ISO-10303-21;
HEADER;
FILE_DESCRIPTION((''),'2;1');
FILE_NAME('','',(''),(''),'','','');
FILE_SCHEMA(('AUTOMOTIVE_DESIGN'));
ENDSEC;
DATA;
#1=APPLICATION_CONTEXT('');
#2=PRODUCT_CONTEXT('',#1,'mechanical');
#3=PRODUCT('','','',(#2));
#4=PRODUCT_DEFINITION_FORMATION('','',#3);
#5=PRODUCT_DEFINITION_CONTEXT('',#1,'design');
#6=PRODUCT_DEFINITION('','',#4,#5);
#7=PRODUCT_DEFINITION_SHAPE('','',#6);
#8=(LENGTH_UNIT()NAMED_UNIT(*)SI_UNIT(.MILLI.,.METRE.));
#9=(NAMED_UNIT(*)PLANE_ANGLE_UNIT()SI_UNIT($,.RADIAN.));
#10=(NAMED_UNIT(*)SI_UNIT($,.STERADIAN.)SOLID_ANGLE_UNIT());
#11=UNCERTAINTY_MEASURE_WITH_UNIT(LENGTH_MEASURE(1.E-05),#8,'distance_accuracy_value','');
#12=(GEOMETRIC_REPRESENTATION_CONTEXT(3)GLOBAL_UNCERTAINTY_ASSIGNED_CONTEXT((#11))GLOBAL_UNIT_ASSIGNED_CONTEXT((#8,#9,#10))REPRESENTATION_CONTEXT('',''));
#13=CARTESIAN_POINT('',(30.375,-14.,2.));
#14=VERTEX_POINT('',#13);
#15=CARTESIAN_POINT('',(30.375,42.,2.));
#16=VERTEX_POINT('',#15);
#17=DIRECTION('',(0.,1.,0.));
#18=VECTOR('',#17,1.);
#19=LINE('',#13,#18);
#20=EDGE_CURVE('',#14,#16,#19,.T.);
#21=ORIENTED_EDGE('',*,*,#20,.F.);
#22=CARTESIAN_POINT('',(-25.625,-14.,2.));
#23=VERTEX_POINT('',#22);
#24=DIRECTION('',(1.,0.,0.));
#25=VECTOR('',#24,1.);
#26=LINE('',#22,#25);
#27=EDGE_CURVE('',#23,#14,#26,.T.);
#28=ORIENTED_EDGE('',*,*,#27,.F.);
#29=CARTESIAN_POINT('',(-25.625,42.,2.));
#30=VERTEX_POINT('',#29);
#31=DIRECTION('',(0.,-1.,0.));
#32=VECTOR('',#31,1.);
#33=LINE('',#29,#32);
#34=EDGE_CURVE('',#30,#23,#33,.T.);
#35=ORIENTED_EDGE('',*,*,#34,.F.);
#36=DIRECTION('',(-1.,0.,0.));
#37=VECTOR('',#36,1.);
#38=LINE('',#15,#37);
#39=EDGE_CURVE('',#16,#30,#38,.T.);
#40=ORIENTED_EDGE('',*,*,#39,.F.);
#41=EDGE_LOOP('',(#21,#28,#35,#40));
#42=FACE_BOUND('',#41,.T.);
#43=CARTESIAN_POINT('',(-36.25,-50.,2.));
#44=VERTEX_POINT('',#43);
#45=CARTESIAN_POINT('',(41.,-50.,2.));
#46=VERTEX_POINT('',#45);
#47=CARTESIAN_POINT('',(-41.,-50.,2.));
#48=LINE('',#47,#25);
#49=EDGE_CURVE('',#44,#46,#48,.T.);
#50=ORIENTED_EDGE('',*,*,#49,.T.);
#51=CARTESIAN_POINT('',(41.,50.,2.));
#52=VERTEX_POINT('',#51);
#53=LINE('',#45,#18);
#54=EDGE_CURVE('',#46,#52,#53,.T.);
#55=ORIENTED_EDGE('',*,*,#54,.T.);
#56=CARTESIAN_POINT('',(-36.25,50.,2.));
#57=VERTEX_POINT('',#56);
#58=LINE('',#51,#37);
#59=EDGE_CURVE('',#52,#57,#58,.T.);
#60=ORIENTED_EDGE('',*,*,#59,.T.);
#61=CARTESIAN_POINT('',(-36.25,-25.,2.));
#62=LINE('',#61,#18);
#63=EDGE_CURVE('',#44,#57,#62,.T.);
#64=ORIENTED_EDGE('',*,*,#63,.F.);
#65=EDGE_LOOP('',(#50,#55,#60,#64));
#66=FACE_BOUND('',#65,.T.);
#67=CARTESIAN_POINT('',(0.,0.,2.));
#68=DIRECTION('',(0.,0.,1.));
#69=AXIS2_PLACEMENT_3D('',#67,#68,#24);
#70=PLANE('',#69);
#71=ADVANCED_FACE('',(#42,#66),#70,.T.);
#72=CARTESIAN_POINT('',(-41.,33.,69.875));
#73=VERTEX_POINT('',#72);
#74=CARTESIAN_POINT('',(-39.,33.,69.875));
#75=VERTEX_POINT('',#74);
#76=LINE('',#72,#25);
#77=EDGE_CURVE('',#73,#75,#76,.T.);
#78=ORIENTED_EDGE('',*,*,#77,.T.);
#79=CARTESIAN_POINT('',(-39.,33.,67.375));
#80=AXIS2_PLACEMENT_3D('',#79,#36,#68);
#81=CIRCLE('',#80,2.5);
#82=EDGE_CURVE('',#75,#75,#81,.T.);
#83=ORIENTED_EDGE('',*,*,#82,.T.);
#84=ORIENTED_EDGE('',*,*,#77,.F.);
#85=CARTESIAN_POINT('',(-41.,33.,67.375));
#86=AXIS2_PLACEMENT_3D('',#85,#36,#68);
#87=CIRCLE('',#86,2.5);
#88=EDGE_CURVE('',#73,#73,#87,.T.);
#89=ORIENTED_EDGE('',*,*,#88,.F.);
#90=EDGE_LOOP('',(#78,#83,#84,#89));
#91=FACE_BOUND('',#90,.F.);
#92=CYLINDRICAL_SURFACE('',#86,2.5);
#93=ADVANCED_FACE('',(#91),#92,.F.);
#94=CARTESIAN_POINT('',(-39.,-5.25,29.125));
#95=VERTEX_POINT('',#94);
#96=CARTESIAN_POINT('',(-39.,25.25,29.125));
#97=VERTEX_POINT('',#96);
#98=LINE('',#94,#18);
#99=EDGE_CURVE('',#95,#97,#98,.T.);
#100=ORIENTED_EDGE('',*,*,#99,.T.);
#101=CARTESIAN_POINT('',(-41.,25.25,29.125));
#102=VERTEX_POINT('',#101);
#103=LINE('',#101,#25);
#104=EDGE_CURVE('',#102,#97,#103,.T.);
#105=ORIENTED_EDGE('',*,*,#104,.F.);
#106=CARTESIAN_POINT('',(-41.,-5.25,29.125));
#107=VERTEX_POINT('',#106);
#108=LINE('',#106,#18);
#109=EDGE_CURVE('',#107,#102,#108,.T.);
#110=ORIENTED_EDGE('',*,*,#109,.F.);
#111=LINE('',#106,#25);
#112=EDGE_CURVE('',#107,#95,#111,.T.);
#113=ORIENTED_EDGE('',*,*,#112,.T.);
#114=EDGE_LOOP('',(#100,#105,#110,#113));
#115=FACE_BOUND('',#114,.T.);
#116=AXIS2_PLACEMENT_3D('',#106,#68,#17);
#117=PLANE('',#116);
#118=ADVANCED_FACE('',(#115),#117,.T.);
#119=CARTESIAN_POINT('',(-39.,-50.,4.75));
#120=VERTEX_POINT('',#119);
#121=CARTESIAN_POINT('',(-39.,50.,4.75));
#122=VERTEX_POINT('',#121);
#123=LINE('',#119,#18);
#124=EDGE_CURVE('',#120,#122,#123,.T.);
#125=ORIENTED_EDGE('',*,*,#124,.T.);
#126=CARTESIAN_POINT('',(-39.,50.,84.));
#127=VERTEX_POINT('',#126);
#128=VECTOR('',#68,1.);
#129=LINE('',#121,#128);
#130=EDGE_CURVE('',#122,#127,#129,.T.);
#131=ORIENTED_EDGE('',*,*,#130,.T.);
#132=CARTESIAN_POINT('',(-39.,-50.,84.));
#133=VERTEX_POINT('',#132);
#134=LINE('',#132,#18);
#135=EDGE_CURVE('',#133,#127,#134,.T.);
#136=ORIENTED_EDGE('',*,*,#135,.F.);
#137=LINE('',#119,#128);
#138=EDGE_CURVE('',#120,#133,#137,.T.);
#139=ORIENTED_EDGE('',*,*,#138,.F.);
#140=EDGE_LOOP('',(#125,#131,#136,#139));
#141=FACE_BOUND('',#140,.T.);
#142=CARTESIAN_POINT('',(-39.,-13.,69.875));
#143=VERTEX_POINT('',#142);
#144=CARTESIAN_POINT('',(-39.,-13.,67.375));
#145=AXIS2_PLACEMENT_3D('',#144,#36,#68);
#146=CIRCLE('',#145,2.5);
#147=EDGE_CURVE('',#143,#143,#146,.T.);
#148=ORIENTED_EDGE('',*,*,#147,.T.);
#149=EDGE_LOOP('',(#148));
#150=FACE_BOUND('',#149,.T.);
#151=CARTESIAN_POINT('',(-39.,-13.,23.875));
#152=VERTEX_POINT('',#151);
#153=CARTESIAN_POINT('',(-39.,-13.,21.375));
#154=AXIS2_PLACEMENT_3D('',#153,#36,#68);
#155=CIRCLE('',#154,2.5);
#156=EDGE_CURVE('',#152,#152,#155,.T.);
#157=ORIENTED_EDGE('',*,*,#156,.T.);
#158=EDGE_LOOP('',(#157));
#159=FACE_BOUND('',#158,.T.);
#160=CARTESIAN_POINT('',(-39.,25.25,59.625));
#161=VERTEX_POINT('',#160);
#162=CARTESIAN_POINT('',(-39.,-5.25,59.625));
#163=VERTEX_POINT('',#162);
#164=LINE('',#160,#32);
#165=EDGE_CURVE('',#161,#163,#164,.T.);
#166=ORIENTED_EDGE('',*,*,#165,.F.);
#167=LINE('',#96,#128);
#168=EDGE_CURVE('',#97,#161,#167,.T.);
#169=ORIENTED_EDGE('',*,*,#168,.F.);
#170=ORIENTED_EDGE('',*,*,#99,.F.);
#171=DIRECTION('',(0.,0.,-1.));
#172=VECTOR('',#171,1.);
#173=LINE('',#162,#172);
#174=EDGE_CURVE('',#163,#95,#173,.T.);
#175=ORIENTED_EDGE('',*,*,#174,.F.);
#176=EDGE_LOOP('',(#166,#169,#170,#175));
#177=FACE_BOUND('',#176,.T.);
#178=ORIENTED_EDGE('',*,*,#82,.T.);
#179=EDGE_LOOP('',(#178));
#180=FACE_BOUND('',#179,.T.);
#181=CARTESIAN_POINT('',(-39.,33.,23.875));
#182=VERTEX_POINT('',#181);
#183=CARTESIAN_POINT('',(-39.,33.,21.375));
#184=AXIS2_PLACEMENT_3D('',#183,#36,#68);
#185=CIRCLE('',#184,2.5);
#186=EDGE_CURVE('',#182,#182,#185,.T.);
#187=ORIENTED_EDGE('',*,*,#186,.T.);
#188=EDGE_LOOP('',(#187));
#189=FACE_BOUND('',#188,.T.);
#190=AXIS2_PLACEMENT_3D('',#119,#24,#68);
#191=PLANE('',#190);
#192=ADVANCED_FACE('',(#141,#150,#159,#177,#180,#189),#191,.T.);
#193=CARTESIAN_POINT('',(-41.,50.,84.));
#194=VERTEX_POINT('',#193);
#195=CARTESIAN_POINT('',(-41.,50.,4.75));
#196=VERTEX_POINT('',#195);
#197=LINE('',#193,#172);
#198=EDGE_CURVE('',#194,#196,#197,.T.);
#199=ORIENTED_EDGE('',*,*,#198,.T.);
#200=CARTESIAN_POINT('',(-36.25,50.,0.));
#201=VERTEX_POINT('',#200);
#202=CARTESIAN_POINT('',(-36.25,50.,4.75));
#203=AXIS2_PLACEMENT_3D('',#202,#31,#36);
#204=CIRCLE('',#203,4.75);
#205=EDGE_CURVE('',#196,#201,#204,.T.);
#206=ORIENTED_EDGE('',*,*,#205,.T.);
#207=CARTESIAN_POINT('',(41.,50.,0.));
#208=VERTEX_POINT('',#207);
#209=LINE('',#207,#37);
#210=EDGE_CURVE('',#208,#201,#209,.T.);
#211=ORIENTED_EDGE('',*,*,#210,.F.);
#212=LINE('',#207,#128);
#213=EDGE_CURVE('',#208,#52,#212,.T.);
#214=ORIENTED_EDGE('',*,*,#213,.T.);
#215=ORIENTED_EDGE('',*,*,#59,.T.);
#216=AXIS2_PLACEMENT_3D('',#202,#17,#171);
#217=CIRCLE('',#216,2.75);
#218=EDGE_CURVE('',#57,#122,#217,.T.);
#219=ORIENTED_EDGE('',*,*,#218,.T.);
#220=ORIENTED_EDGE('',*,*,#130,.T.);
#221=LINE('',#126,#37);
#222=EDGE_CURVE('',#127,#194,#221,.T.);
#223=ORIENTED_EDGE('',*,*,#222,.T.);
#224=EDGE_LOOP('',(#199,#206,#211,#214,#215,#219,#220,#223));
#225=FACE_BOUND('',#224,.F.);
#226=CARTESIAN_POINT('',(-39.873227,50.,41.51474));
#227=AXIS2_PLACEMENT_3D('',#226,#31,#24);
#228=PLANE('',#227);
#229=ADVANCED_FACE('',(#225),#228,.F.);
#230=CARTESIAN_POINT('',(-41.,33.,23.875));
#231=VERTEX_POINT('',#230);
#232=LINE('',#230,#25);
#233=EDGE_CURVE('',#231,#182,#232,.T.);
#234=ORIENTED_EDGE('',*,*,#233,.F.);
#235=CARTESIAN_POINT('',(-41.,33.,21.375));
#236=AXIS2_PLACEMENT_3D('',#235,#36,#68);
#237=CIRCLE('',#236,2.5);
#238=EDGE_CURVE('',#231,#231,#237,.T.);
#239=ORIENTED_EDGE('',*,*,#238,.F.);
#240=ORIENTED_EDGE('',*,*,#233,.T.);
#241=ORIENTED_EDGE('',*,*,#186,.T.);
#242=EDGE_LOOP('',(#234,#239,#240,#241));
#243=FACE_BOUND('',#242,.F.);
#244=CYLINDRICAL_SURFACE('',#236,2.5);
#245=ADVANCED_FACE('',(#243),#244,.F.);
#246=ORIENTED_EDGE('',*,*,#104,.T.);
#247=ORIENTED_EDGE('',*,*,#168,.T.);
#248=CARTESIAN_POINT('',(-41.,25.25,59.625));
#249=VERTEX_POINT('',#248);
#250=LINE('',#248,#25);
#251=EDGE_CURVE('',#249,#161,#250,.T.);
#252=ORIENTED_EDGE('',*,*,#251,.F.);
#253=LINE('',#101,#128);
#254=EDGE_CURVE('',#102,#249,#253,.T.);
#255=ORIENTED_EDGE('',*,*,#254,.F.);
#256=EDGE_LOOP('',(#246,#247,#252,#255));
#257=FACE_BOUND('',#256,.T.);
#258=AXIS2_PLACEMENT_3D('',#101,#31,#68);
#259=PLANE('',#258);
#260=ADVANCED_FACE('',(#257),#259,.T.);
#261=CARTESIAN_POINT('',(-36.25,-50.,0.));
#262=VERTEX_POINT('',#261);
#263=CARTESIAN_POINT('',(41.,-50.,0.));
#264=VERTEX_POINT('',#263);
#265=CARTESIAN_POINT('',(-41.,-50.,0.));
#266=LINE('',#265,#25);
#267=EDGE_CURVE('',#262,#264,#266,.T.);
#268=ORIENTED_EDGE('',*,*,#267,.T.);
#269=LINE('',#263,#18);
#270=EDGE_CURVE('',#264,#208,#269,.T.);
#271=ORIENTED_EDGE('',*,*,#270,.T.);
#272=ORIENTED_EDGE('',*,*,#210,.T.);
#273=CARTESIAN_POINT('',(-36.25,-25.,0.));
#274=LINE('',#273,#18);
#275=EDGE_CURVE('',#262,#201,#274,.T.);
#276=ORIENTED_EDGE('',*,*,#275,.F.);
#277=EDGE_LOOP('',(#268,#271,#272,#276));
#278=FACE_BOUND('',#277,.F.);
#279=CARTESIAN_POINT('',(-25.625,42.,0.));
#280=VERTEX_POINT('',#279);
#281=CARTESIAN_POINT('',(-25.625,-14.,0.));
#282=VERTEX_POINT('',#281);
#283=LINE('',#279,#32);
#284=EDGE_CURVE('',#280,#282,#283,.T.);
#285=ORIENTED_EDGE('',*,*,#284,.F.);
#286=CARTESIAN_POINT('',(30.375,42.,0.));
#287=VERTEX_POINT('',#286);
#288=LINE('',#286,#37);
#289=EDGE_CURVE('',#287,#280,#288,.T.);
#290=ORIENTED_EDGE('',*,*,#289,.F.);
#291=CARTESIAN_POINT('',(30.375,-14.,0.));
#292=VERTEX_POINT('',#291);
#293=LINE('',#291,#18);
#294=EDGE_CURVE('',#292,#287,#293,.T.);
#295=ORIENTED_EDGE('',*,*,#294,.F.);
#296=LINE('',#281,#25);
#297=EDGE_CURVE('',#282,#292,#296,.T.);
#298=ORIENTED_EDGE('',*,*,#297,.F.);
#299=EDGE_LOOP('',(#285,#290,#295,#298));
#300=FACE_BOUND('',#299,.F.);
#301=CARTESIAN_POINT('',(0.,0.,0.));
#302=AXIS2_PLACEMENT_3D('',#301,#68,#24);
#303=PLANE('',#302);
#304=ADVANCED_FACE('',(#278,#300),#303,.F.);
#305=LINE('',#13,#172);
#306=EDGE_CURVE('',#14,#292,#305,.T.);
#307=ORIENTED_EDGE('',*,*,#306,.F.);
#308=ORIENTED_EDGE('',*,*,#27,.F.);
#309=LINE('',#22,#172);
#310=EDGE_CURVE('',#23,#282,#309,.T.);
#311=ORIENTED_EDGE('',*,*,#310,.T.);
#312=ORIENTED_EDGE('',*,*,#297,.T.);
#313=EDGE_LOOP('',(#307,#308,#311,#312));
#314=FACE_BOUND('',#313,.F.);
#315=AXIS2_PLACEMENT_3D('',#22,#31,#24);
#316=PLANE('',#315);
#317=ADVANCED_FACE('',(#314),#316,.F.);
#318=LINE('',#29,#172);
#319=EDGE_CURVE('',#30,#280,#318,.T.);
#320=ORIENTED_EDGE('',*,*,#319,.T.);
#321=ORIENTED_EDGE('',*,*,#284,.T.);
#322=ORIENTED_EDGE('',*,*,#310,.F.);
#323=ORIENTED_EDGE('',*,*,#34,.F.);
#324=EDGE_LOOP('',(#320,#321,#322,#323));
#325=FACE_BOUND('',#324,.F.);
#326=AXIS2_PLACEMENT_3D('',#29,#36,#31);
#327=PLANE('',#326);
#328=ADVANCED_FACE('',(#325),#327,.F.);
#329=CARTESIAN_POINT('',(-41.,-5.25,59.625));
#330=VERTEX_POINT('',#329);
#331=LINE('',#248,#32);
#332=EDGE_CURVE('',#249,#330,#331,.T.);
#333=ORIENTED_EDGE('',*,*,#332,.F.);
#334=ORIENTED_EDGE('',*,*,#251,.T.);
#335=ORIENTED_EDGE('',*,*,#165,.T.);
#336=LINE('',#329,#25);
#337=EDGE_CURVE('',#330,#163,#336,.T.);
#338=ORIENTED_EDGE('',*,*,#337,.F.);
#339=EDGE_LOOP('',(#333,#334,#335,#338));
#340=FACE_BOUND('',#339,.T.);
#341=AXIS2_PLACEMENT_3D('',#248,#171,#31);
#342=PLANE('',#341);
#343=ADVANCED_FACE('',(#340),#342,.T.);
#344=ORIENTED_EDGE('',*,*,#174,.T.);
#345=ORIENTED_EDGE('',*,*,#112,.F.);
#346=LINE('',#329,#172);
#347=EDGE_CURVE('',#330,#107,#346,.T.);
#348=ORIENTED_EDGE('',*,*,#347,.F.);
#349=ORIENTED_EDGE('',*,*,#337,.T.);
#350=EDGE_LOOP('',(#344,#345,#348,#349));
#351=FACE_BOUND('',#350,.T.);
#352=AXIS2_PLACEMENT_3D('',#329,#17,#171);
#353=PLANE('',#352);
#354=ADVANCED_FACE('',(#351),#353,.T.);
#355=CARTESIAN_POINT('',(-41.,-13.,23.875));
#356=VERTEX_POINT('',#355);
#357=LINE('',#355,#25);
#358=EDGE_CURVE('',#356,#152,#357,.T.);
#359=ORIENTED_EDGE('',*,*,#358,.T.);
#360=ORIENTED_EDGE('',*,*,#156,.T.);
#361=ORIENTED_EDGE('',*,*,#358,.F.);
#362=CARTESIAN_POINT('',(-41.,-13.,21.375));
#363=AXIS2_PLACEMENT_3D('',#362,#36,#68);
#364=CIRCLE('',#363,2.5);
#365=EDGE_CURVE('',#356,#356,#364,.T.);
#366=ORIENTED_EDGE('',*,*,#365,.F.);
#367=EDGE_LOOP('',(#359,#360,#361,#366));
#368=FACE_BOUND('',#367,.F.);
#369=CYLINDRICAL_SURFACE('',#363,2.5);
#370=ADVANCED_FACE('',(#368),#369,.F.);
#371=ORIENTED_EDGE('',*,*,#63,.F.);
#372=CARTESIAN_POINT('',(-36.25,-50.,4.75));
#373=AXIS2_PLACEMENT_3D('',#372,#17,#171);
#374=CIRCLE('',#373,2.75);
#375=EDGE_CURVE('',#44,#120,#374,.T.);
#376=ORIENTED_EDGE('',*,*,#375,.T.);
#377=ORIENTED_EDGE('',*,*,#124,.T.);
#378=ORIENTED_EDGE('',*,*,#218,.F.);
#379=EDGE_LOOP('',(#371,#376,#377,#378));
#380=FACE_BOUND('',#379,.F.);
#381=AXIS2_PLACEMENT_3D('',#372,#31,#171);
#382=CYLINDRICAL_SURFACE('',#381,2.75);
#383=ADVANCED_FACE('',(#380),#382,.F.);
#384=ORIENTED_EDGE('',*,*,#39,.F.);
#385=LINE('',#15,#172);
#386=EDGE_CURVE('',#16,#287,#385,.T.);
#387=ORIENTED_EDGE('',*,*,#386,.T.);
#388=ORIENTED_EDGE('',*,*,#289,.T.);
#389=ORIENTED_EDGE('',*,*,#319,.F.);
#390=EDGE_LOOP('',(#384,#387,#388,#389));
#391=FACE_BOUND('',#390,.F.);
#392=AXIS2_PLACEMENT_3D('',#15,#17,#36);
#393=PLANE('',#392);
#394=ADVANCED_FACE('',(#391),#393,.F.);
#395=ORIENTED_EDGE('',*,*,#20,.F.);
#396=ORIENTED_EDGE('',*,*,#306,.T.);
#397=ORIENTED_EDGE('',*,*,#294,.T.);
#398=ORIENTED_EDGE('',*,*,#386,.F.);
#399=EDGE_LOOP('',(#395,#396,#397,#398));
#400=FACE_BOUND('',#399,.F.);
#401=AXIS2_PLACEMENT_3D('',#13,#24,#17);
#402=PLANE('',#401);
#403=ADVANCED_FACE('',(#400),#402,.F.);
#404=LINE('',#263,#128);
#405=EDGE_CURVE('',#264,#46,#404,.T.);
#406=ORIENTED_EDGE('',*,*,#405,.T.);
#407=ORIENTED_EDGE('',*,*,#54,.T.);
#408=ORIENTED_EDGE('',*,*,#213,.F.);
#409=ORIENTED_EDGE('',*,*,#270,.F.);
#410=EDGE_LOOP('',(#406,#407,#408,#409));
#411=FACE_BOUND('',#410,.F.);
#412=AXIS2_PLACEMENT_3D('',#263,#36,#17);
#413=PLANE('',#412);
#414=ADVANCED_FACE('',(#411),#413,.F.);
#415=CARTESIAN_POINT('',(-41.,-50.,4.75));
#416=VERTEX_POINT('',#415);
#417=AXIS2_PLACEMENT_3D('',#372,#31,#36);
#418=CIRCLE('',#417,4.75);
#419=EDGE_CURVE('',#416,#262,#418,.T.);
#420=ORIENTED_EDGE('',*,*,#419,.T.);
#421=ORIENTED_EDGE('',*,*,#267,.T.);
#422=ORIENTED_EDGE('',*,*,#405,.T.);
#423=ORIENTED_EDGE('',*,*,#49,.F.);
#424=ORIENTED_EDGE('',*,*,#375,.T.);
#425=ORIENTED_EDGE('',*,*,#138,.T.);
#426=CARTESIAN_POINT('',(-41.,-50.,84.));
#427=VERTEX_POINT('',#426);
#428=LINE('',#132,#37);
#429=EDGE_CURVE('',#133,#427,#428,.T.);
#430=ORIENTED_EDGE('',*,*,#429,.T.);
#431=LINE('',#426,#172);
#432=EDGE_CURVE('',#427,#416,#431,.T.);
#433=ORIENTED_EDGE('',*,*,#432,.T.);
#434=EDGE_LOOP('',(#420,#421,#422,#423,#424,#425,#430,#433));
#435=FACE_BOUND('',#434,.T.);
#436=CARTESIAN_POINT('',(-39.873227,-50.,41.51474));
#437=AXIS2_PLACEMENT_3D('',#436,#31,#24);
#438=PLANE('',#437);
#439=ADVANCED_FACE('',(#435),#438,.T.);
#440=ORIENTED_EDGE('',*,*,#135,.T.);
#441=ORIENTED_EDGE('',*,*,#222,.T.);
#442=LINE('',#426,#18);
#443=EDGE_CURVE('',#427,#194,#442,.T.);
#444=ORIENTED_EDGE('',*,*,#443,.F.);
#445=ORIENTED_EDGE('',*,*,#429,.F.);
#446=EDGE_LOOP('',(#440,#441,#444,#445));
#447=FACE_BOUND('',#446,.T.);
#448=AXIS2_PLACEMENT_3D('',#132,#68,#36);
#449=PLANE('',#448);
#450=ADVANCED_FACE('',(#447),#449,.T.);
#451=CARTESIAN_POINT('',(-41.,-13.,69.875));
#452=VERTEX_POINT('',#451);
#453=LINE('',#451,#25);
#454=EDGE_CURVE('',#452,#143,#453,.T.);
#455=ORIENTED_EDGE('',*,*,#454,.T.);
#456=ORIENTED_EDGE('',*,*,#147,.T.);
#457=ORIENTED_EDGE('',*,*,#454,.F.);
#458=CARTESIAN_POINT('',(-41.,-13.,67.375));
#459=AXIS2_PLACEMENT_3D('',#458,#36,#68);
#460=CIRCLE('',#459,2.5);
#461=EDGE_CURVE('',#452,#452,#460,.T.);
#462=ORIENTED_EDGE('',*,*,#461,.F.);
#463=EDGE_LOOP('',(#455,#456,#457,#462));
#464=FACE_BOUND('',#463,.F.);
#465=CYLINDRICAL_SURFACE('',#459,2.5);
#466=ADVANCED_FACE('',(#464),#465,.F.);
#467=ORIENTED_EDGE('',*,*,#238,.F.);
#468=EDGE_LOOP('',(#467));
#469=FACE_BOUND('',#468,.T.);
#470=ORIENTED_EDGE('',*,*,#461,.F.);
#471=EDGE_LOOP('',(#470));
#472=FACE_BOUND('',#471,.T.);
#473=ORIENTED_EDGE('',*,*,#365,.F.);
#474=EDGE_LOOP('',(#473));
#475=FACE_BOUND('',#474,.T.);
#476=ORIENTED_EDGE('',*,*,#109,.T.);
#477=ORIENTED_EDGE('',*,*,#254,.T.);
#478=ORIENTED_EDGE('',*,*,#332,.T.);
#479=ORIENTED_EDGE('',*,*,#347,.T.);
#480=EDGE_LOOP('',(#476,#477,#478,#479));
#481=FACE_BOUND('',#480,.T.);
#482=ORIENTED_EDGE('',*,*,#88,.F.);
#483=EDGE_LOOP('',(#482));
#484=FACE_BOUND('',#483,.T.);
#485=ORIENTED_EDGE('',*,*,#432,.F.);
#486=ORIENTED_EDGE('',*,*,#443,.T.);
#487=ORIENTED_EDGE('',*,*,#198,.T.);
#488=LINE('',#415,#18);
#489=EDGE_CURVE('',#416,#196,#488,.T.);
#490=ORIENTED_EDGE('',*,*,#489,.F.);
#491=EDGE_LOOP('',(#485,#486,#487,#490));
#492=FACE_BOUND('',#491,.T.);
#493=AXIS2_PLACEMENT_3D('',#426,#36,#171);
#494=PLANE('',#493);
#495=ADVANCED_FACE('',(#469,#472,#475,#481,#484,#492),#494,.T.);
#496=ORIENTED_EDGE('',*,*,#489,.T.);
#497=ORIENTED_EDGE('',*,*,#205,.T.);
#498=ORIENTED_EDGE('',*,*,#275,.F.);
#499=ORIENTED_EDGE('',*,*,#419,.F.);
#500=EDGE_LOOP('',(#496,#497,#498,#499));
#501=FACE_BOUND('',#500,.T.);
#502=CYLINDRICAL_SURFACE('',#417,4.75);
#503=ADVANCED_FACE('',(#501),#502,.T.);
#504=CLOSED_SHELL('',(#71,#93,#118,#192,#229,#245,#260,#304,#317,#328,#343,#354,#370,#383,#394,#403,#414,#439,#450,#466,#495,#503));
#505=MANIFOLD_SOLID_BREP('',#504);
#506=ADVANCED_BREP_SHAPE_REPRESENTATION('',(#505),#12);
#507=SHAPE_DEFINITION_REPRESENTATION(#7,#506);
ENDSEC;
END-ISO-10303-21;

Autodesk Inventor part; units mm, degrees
ref_plane "YZ Plane" through (0, 0, 0) normal (1, 0, 0) x (0, 1, 0)
ref_plane "XZ Plane" through (0, 0, 0) normal (0, 1, 0) x (-1, 0, 0)
ref_plane "XY Plane" through (0, 0, 0) normal (0, 0, 1) x (1, 0, 0)
sketch "Sketch1" plane through (0, 0, 0) normal (0, 0, 1) x (1, 0, 0)
  line L0 (-41, -50) -> (41, -50)
  line L1 (41, -50) -> (41, 50)
  line L2 (41, 50) -> (-41, 50)
  line L3 (-41, 50) -> (-41, -50)
  line L4 (-41, -50) -> (41, 50) construction
  line L5 (41, -50) -> (-41, 50) construction
  point P0 (0, 0)
  dimension "d154" = 82
  dimension "d155" = 100
extrude "Plate5" add sketch "Sketch1" along normal blind 2
sketch "Sketch7" plane through (-39, -50, 0) normal (-1, 0, 0) x (0, -1, 0)
  line L0 (-100, 0) -> (0, 0)
  line L1 (0, 0) -> (0, 84)
  line L2 (0, 84) -> (-100, 84)
  line L3 (-100, 84) -> (-100, 0)
edge flange "Flange3" height 84 angle 90 thickness 2 bend radius 2.75 thickness toward (-1, 0, 0) relief round relief width 2 relief depth 1 edges at (-41, 0, 2) wall of the first edge with corners at (-39, 50, 0) (-39, -50, 0) (-39, -50, 84) (-39, 50, 84)
bend "Bend3"
corner "Corner3"
sketch "Sketch8" plane through (0, 0, 2) normal (0, 0, 1) x (1, 0, 0)
  line L0 (41, 50) -> (41, -50) projected
  line L1 (-36.25, 50) -> (41, 50) projected
  line L2 (30.375, 42) -> (-25.625, 42)
  line L3 (-25.625, 42) -> (-25.625, -14)
  line L4 (-25.625, -14) -> (30.375, -14)
  line L5 (30.375, -14) -> (30.375, 42)
  line L6 (30.375, 42) -> (-25.625, -14) construction
  line L7 (-25.625, 42) -> (30.375, -14) construction
  point P0 (0, 0)
  point P1 (2.375, 14)
  point P2 (2.375, 50)
  dimension "d167" = 56
  dimension "d168" = 56
  dimension "d169" = 8
extrude "Cut1" cut sketch "Sketch8" against normal blind 2
sketch "Sketch9" plane through (-41, -50, 84) normal (-1, 0, 0) x (0, 0, 1)
  line L0 (-24.375, 44.75) -> (-54.875, 44.75)
  line L1 (-54.875, 44.75) -> (-54.875, 75.25)
  line L2 (-54.875, 75.25) -> (-24.375, 75.25)
  line L3 (-24.375, 75.25) -> (-24.375, 44.75)
  line L4 (-24.375, 44.75) -> (-54.875, 75.25) construction
  line L5 (-54.875, 44.75) -> (-24.375, 75.25) construction
  circle A0 centre (-16.625, 37) radius 2.5
  circle A1 centre (-62.625, 37) radius 2.5
  circle A2 centre (-62.625, 83) radius 2.5
  circle A3 centre (-16.625, 83) radius 2.5
  circle A4 centre (-39.625, 60) radius 32.5269 construction
  line L6 (-54.875, 44.75) -> (-62.625, 37) construction
  line L7 (-14.125, 34.5) -> (-65.125, 34.5) construction
  line L8 (-65.125, 34.5) -> (-65.125, 85.5) construction
  line L9 (-65.125, 85.5) -> (-14.125, 85.5) construction
  line L10 (-14.125, 85.5) -> (-14.125, 34.5) construction
  line L11 (-14.125, 34.5) -> (-65.125, 85.5) construction
  line L12 (-65.125, 34.5) -> (-14.125, 85.5) construction
  line L13 (-79.25, 100) -> (0, 100) projected
  line L14 (-39.625, 100) -> (-39.625, 60) construction
  circle A5 centre (-62.625, 83) radius 10.9602 construction
  line L15 (-16.625, 37) -> (-62.625, 37) construction
  line L16 (-62.625, 37) -> (-62.625, 83) construction
  line L17 (-62.625, 83) -> (-16.625, 83) construction
  line L18 (-16.625, 83) -> (-16.625, 37) construction
  line L19 (-16.625, 37) -> (-62.625, 83) construction
  line L20 (-62.625, 37) -> (-16.625, 83) construction
  point P0 (-84, 50)
  point P1 (-104.8197, 150.8767)
  point P2 (-104.8197, 150.8767)
  dimension "d181" = 21.9203
  dimension "d174" = 30.5
  dimension "d175" = 30.5
  dimension "d176" = 5
  dimension "d179" = 40
  dimension "d180" = 51
  dimension "d184" = 46
extrude "Cut2" cut sketch "Sketch9" against normal blind 2
properties part number "PRS 1200-510 FDS Central tube wall" material "Stainless Steel"
